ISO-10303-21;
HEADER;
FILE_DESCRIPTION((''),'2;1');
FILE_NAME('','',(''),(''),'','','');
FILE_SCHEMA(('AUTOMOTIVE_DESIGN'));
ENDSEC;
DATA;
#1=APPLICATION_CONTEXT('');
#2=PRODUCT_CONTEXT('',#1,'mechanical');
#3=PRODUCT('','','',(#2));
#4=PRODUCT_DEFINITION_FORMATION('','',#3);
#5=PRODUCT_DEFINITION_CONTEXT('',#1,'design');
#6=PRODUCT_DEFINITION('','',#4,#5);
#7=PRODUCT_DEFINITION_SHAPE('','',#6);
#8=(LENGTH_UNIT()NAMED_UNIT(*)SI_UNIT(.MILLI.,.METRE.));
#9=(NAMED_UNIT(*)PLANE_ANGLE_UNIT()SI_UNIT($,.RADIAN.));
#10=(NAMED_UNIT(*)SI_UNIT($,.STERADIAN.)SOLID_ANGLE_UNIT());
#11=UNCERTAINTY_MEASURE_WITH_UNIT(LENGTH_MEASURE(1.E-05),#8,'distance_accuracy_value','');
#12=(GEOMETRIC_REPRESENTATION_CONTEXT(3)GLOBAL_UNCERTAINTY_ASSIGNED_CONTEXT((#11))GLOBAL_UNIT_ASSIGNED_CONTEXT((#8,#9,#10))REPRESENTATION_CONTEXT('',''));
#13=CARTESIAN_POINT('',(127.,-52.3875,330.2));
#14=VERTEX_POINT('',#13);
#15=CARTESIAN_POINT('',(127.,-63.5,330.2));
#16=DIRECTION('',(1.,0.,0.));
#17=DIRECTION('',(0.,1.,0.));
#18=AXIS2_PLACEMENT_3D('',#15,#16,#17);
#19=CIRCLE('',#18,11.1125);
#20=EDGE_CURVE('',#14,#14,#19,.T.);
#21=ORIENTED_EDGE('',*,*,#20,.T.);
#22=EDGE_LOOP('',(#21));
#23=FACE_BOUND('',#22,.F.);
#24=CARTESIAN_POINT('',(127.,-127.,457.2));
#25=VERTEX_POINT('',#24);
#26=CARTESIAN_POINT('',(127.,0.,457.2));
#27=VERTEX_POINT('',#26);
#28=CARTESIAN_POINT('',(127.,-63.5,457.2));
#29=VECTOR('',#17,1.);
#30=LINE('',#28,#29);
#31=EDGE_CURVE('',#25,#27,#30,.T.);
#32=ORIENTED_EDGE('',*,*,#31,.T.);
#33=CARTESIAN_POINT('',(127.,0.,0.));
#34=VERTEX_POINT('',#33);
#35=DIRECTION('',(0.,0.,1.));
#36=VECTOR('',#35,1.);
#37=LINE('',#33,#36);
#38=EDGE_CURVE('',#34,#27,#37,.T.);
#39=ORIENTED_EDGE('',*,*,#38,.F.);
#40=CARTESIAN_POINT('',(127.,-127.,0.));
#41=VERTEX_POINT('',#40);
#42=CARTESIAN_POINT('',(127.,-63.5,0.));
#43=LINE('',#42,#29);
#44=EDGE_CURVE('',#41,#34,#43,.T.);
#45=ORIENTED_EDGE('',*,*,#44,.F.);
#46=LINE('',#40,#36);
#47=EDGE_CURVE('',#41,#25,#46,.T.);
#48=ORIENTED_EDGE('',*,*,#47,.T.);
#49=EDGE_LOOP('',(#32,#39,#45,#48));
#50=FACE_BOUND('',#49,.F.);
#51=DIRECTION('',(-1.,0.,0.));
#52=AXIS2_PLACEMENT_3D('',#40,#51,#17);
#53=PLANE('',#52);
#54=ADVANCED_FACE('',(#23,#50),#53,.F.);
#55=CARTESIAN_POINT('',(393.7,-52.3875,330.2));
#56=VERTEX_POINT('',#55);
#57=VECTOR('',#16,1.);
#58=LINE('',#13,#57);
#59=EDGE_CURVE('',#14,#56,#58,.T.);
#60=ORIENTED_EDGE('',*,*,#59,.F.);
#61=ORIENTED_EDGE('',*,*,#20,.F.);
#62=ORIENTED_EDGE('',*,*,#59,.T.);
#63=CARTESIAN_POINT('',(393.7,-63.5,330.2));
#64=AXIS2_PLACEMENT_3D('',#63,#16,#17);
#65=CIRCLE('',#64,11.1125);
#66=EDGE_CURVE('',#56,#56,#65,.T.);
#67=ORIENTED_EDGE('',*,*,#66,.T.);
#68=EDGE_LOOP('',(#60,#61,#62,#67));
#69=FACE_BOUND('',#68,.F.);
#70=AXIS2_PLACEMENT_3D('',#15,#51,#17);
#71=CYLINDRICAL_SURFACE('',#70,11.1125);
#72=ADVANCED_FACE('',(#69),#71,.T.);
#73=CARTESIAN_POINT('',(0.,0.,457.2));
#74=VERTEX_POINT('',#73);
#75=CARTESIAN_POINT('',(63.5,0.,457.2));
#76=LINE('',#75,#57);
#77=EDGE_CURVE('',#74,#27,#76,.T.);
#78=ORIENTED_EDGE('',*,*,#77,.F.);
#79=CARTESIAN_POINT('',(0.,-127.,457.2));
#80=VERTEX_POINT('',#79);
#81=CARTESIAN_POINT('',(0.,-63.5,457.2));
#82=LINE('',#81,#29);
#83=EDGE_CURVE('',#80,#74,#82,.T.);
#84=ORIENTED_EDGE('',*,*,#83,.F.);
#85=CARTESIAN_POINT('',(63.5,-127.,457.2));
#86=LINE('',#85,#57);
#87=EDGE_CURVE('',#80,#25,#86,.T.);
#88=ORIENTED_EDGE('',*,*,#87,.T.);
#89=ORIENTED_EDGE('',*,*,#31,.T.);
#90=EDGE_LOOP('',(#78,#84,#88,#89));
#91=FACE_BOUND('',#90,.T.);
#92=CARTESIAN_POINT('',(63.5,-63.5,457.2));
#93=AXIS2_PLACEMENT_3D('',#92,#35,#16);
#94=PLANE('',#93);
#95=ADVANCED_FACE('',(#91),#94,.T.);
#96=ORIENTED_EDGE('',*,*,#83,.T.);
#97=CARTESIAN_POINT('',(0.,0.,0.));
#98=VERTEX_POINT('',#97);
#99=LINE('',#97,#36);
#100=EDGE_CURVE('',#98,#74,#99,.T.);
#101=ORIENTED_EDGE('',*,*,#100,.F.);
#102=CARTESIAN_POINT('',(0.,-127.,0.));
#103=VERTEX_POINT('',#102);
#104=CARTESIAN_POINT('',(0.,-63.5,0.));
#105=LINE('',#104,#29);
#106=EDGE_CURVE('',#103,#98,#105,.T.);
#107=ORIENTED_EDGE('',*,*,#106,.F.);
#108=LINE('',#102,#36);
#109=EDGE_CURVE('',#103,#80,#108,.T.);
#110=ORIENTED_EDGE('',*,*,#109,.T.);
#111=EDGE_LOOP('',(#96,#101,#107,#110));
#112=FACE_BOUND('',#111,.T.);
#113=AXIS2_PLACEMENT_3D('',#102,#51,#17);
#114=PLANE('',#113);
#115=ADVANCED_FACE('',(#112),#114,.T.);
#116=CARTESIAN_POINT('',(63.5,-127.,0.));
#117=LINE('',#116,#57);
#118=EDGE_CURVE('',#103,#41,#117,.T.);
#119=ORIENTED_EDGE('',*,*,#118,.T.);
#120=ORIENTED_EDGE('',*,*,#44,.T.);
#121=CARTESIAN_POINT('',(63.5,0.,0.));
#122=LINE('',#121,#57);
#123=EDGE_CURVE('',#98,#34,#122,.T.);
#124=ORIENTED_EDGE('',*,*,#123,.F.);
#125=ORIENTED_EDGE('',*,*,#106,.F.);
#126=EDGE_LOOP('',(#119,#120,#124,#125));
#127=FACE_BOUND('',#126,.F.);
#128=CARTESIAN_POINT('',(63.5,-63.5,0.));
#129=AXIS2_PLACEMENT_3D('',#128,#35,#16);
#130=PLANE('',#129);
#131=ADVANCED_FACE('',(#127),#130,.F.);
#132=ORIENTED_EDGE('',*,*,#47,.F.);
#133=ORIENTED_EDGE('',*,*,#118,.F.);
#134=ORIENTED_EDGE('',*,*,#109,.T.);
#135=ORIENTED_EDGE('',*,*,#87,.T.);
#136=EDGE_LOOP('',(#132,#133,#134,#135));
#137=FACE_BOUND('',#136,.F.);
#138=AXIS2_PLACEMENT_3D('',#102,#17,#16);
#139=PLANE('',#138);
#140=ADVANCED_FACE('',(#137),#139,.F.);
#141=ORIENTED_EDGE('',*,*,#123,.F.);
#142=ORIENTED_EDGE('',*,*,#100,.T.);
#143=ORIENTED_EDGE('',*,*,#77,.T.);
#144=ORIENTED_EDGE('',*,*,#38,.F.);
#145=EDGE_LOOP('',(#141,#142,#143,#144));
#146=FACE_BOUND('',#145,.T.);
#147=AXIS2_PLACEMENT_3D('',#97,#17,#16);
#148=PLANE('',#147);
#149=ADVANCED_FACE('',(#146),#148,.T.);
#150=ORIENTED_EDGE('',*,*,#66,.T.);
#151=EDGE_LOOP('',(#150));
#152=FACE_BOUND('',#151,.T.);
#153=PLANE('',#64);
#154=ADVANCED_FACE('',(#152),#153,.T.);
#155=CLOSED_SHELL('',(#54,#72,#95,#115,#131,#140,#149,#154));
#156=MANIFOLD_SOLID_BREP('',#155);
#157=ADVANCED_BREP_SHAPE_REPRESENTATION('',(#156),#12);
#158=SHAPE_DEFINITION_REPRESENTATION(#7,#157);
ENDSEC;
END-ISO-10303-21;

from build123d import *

# Parameters (mm, degrees)
F0_W     = 127
F0_H     = 127
F1_DEPTH = 457.2
F2_R     = 11.1125
F3_DEPTH = 266.7


# Not quite as in the source:
# - a feature names something its author has since deleted; it is built from what else it names


with BuildPart() as f1:
    # F0 (on Top) → F1 (new body)
    with BuildSketch(Plane.XY):
        with Locations((63.5, -63.5)):
            Rectangle(F0_W, F0_H)
    extrude(amount=F1_DEPTH)

    # F2 (on face) → F3 (join)
    with BuildSketch(Plane.YZ.offset(127)):
        with Locations((-63.5, 330.2)):
            Circle(F2_R)
    extrude(amount=F3_DEPTH)


solid = f1.part
